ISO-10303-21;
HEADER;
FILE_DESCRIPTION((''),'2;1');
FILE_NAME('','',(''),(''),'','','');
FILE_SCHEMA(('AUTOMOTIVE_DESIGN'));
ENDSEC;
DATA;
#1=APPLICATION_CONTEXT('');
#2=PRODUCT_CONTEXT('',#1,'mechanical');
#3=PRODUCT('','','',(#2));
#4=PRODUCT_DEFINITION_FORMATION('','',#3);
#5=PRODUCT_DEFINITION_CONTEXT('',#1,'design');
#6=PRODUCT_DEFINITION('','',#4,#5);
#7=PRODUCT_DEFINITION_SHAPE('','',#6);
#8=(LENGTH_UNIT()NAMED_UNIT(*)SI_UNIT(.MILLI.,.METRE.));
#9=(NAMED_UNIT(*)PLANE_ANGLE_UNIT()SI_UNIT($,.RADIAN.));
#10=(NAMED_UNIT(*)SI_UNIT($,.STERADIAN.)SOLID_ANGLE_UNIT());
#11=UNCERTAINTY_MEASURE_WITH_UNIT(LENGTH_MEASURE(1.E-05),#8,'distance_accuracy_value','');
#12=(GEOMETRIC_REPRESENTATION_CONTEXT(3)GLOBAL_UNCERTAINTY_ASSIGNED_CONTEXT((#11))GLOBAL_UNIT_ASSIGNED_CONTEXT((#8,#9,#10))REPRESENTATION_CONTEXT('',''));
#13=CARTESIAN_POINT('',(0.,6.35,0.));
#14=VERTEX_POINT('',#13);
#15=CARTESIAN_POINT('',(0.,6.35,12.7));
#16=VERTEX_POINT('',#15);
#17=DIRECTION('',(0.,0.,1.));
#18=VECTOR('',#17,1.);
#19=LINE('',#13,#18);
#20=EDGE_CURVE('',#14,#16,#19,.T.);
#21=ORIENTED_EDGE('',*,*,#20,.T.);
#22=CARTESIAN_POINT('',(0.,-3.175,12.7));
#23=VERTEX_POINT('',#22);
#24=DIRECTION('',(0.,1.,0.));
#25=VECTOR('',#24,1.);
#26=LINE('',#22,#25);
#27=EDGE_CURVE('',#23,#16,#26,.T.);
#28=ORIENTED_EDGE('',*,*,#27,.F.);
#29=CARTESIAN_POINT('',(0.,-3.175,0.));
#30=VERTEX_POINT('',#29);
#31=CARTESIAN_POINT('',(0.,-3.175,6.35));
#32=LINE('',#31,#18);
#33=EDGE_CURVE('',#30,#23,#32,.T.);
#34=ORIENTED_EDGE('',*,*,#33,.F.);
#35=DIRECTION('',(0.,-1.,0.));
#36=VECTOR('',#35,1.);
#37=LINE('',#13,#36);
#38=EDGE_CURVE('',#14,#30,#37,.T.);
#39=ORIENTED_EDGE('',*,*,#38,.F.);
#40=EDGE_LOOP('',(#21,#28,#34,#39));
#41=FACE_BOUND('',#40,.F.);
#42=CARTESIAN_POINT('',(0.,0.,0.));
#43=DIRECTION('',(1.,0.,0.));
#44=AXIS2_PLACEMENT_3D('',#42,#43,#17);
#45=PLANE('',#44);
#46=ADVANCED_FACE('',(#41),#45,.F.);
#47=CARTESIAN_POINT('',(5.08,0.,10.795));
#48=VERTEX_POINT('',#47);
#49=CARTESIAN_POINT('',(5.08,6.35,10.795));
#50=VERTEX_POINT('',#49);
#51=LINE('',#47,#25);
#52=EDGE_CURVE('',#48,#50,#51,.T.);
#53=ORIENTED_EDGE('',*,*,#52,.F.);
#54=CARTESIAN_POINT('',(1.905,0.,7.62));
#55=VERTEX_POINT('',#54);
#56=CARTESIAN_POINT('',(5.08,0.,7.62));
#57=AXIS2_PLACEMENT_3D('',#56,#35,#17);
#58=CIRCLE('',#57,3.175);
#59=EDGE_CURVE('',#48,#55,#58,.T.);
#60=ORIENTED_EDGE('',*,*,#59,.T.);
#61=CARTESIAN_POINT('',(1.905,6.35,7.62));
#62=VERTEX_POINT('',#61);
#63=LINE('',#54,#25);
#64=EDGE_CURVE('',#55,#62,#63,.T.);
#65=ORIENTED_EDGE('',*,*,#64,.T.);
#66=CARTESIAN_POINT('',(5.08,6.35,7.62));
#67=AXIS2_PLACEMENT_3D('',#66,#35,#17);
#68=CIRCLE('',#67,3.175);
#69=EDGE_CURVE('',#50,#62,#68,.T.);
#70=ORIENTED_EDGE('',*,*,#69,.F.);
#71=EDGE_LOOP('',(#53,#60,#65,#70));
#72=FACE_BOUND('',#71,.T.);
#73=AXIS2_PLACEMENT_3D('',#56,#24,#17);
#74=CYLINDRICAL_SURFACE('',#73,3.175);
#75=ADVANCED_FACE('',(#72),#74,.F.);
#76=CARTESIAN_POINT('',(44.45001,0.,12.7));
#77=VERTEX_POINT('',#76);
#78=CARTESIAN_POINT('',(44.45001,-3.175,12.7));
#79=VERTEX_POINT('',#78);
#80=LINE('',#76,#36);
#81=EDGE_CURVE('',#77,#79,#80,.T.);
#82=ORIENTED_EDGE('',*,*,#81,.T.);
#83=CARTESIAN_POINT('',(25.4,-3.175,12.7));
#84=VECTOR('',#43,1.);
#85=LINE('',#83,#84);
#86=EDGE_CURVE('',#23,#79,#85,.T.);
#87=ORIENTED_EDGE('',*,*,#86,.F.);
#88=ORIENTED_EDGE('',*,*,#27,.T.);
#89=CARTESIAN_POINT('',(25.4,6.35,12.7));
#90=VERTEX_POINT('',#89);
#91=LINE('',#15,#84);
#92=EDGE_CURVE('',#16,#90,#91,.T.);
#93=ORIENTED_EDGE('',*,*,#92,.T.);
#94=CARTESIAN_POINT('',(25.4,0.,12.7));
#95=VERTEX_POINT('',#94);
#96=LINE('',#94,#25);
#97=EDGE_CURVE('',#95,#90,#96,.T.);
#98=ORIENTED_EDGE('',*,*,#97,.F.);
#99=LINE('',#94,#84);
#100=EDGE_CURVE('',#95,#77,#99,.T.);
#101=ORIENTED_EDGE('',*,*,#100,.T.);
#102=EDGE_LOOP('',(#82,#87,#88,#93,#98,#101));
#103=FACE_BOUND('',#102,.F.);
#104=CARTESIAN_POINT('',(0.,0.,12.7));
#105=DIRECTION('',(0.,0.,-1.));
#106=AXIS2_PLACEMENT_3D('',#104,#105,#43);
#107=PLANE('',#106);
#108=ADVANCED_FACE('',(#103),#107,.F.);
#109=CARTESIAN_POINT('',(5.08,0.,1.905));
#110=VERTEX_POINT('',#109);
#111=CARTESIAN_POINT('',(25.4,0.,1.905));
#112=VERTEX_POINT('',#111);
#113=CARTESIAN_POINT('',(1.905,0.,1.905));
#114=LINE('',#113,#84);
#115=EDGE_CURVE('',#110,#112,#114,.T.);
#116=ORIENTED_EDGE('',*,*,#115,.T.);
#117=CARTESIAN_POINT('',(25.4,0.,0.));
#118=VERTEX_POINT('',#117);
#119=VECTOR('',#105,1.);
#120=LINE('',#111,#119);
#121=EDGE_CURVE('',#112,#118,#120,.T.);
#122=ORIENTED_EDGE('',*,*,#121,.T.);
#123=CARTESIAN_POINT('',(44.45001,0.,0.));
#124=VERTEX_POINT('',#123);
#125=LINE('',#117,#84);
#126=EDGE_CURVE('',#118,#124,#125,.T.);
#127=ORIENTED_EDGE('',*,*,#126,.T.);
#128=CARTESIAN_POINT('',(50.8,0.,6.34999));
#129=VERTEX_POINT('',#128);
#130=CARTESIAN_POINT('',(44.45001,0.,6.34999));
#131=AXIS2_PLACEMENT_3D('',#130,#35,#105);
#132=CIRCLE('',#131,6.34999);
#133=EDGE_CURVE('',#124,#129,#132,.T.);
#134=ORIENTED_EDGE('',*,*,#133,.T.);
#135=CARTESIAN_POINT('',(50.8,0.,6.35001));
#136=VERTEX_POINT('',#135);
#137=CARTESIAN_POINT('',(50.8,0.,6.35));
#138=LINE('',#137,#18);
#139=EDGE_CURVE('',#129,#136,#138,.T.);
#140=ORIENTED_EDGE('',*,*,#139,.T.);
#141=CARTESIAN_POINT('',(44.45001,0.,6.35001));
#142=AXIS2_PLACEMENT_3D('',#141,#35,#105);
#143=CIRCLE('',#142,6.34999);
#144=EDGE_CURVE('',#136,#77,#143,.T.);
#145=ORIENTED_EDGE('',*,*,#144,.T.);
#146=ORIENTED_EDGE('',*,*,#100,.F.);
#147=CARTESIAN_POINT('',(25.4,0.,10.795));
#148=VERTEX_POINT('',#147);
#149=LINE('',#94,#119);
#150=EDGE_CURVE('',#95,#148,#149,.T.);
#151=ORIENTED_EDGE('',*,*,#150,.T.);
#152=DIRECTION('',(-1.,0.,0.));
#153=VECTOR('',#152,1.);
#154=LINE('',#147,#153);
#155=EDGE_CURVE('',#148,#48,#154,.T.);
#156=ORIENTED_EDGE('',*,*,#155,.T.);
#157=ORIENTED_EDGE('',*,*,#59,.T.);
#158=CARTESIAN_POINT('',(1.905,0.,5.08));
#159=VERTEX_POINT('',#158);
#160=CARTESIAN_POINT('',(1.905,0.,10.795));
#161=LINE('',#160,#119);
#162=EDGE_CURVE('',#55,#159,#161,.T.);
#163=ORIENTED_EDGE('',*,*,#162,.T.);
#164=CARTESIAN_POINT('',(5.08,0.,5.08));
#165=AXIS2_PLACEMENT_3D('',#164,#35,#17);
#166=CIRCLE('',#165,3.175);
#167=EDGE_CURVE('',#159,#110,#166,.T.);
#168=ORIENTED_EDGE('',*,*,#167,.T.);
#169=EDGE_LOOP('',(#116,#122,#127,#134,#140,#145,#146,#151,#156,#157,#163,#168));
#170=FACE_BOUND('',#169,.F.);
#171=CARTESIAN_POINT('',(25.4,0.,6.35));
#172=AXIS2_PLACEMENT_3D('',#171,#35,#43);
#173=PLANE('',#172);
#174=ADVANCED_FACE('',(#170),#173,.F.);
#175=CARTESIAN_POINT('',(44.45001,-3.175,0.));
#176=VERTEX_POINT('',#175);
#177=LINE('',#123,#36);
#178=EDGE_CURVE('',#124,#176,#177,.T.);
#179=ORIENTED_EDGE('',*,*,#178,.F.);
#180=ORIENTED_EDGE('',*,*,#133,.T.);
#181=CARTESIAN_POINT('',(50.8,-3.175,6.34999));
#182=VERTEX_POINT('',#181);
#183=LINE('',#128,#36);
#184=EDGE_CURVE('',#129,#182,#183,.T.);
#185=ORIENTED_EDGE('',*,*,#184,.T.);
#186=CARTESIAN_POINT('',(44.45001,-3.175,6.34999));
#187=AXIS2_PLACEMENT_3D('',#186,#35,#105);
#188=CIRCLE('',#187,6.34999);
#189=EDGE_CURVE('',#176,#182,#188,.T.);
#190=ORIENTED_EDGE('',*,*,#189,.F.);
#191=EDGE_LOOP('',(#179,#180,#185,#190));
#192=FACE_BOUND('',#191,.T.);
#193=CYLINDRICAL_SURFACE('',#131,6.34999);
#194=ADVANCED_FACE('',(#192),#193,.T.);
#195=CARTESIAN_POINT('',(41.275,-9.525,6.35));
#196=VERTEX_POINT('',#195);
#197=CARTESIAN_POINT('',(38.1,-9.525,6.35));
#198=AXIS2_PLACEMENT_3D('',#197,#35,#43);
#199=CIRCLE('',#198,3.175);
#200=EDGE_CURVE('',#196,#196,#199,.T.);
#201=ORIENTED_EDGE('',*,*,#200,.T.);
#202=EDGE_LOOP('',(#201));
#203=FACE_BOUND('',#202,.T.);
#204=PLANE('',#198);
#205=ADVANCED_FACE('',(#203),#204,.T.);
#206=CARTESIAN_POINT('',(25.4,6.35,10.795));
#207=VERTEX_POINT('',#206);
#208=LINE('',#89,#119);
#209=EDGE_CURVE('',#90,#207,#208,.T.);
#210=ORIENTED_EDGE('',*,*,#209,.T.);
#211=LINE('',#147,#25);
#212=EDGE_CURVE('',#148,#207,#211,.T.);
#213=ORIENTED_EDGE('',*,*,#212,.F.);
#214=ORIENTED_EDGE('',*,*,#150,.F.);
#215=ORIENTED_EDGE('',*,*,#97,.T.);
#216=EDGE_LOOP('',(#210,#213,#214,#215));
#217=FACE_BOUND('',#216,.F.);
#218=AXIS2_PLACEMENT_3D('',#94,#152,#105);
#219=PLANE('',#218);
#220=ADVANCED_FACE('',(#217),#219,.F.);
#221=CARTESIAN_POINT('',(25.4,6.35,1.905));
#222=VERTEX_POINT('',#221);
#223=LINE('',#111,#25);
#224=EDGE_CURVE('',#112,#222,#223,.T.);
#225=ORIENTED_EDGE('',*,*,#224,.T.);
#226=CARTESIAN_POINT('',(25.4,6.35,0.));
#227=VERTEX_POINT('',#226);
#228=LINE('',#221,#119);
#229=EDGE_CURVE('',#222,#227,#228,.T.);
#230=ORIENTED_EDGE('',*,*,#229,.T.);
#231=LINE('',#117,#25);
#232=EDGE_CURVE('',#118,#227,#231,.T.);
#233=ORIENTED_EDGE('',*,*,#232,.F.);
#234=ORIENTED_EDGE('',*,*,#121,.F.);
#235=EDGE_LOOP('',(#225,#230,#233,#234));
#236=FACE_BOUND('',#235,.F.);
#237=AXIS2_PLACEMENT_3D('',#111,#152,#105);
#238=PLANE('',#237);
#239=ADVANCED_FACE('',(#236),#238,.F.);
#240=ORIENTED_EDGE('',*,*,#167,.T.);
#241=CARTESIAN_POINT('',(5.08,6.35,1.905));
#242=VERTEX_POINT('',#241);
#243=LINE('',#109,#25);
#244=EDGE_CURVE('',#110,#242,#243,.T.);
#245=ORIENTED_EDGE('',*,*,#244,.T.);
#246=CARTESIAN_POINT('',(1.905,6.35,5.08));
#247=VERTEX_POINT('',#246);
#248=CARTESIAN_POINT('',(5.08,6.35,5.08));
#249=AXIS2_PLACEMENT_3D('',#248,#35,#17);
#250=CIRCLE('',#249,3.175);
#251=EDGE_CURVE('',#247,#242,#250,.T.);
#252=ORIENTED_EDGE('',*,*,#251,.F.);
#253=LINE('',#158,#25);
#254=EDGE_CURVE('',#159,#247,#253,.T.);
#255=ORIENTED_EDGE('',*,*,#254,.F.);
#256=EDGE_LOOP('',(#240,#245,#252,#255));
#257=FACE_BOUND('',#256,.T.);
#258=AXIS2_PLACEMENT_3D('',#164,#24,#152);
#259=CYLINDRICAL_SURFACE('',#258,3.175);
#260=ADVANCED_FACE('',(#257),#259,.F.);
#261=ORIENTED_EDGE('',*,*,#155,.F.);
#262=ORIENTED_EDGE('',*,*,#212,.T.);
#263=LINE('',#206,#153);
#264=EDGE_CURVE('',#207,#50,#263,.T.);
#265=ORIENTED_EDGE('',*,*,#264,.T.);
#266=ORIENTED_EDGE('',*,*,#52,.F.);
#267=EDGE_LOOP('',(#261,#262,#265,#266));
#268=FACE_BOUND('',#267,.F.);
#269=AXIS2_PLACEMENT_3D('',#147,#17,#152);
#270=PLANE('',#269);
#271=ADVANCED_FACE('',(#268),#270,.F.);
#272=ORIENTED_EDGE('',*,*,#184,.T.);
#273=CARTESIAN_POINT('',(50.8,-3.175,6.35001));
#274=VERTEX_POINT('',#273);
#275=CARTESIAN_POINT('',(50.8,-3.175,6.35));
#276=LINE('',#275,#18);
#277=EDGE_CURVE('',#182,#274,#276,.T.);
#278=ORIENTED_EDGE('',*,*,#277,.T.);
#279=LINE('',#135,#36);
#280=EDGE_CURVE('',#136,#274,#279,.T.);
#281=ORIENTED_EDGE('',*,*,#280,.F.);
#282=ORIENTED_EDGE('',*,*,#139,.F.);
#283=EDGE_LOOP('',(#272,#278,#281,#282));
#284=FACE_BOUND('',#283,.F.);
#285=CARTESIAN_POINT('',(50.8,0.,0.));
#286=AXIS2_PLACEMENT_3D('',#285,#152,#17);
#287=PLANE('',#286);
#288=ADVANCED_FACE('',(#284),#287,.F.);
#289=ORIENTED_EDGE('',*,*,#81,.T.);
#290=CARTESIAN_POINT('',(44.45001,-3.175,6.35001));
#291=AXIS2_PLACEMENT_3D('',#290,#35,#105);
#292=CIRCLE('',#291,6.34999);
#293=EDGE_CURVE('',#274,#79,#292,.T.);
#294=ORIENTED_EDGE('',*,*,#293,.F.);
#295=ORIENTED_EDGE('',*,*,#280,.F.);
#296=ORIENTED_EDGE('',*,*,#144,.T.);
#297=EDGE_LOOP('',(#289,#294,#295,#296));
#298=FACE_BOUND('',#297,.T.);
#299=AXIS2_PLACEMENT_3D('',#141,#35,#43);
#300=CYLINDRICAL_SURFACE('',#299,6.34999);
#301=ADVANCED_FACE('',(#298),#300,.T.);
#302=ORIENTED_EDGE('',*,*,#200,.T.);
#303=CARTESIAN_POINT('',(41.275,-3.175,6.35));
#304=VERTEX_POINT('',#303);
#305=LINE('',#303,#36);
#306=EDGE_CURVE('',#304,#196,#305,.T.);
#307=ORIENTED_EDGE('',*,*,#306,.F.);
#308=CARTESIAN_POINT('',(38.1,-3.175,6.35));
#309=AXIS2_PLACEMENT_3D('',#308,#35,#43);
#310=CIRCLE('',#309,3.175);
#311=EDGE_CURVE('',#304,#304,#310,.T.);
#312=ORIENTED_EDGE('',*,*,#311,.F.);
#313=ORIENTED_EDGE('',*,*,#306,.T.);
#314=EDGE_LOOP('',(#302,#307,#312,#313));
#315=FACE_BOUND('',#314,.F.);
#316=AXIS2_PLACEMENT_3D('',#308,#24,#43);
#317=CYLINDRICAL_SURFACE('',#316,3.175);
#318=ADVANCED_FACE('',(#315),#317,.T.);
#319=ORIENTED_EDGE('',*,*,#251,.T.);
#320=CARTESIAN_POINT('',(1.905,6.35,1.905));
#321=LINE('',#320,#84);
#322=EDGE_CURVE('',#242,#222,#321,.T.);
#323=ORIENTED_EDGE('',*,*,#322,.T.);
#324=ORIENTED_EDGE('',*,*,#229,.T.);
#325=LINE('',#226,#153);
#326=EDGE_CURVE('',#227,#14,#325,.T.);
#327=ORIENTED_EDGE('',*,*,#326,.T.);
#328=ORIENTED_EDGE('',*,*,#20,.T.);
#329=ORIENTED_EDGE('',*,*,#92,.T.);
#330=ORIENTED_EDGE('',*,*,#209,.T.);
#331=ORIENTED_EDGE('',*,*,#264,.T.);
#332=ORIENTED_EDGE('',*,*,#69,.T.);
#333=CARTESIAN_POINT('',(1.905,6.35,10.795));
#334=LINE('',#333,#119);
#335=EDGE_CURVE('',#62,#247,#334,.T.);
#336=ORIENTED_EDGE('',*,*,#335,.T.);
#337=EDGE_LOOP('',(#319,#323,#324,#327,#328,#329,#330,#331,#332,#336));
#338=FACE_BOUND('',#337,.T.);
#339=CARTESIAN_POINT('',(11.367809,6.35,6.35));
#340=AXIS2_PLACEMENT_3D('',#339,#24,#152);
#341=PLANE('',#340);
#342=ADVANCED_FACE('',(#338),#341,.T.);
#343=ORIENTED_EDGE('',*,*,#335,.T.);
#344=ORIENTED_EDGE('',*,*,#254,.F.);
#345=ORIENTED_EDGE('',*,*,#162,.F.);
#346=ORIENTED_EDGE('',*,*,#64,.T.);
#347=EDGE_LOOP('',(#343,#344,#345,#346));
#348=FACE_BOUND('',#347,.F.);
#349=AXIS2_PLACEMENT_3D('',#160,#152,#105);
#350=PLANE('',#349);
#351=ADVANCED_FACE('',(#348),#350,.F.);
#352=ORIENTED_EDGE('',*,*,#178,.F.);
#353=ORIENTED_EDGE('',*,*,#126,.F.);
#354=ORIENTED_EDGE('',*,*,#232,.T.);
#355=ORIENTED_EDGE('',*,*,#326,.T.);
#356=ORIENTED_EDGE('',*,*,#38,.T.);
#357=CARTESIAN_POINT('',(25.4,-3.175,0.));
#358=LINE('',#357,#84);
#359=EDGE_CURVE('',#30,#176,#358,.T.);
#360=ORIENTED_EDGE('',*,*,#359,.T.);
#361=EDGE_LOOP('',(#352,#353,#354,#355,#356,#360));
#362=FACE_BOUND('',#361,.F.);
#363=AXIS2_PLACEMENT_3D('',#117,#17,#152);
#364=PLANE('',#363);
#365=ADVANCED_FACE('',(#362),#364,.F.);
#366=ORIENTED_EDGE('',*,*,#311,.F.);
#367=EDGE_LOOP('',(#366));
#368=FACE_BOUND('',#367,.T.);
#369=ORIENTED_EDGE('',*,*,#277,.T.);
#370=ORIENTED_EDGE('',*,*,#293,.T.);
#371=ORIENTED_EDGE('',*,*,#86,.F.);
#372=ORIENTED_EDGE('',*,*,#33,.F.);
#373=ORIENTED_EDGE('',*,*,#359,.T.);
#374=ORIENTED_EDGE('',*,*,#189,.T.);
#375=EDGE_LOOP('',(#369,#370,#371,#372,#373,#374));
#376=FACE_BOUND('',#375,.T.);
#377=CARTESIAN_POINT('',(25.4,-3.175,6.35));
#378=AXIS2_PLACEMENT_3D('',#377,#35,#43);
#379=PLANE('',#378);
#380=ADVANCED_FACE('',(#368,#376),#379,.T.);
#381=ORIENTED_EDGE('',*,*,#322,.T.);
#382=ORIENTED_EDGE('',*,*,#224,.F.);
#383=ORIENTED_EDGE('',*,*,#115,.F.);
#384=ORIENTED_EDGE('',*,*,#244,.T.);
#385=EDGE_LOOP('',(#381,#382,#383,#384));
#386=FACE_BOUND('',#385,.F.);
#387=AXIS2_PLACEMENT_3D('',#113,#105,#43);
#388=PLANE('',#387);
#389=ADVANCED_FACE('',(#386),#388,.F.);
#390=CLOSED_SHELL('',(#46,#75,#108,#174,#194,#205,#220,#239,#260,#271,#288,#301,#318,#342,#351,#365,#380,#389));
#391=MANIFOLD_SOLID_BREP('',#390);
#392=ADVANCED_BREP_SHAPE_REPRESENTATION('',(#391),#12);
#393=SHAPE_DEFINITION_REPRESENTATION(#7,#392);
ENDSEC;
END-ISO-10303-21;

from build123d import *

# Parameters (mm, degrees)
F0_W     = 50.8
F0_H     = 12.7
F1_DEPTH = 3.175
F2_R     = 3.175
F3_DEPTH = 6.35
F5_DEPTH = 6.35
F6_R     = 3.175
F7_R     = 6.34999


# Not quite as in the source:
# - a fillet or chamfer is up to 0.001 mm smaller than in the source, because OpenCascade refuses the exact size


with BuildPart() as f1:
    # F0 (on Front) → F1 (new body)
    with BuildSketch(Plane.XZ):
        with Locations((25.4, 6.35)):
            Rectangle(F0_W, F0_H)
    extrude(amount=F1_DEPTH)

    # F2 (on face) → F3 (join)
    with BuildSketch(Plane.XZ.offset(3.175)):
        with Locations((38.1, 6.35)):
            Circle(F2_R)
    extrude(amount=F3_DEPTH)

    # F4 (on face) → F5 (join)
    with BuildSketch(Plane(origin=(0, 0, 0), x_dir=(-1, 0, 0), z_dir=(0, 1, 0))):
        Polygon((0, 0), (0, 12.7), (-25.4, 12.7), (-25.4, 10.795), (-1.905, 10.795), (-1.905, 1.905), (-25.4, 1.905), (-25.4, 0), align=None)
    extrude(amount=F5_DEPTH)

    # F6
    f6_edges = [f1.edges().sort_by_distance(p)[0] for p in [
        (1.905, 3.175, 10.795),
        (1.905, 3.175, 1.905),
    ]]
    fillet(f6_edges, radius=F6_R)

    # F7 (radius 6.35 in the source; OpenCascade refuses exactly that, so slightly less here)
    f7_edges = [f1.edges().sort_by_distance(p)[0] for p in [
        (50.8, -1.5875, 12.7),
        (50.8, -1.5875, 0),
    ]]
    fillet(f7_edges, radius=F7_R)


solid = f1.part
